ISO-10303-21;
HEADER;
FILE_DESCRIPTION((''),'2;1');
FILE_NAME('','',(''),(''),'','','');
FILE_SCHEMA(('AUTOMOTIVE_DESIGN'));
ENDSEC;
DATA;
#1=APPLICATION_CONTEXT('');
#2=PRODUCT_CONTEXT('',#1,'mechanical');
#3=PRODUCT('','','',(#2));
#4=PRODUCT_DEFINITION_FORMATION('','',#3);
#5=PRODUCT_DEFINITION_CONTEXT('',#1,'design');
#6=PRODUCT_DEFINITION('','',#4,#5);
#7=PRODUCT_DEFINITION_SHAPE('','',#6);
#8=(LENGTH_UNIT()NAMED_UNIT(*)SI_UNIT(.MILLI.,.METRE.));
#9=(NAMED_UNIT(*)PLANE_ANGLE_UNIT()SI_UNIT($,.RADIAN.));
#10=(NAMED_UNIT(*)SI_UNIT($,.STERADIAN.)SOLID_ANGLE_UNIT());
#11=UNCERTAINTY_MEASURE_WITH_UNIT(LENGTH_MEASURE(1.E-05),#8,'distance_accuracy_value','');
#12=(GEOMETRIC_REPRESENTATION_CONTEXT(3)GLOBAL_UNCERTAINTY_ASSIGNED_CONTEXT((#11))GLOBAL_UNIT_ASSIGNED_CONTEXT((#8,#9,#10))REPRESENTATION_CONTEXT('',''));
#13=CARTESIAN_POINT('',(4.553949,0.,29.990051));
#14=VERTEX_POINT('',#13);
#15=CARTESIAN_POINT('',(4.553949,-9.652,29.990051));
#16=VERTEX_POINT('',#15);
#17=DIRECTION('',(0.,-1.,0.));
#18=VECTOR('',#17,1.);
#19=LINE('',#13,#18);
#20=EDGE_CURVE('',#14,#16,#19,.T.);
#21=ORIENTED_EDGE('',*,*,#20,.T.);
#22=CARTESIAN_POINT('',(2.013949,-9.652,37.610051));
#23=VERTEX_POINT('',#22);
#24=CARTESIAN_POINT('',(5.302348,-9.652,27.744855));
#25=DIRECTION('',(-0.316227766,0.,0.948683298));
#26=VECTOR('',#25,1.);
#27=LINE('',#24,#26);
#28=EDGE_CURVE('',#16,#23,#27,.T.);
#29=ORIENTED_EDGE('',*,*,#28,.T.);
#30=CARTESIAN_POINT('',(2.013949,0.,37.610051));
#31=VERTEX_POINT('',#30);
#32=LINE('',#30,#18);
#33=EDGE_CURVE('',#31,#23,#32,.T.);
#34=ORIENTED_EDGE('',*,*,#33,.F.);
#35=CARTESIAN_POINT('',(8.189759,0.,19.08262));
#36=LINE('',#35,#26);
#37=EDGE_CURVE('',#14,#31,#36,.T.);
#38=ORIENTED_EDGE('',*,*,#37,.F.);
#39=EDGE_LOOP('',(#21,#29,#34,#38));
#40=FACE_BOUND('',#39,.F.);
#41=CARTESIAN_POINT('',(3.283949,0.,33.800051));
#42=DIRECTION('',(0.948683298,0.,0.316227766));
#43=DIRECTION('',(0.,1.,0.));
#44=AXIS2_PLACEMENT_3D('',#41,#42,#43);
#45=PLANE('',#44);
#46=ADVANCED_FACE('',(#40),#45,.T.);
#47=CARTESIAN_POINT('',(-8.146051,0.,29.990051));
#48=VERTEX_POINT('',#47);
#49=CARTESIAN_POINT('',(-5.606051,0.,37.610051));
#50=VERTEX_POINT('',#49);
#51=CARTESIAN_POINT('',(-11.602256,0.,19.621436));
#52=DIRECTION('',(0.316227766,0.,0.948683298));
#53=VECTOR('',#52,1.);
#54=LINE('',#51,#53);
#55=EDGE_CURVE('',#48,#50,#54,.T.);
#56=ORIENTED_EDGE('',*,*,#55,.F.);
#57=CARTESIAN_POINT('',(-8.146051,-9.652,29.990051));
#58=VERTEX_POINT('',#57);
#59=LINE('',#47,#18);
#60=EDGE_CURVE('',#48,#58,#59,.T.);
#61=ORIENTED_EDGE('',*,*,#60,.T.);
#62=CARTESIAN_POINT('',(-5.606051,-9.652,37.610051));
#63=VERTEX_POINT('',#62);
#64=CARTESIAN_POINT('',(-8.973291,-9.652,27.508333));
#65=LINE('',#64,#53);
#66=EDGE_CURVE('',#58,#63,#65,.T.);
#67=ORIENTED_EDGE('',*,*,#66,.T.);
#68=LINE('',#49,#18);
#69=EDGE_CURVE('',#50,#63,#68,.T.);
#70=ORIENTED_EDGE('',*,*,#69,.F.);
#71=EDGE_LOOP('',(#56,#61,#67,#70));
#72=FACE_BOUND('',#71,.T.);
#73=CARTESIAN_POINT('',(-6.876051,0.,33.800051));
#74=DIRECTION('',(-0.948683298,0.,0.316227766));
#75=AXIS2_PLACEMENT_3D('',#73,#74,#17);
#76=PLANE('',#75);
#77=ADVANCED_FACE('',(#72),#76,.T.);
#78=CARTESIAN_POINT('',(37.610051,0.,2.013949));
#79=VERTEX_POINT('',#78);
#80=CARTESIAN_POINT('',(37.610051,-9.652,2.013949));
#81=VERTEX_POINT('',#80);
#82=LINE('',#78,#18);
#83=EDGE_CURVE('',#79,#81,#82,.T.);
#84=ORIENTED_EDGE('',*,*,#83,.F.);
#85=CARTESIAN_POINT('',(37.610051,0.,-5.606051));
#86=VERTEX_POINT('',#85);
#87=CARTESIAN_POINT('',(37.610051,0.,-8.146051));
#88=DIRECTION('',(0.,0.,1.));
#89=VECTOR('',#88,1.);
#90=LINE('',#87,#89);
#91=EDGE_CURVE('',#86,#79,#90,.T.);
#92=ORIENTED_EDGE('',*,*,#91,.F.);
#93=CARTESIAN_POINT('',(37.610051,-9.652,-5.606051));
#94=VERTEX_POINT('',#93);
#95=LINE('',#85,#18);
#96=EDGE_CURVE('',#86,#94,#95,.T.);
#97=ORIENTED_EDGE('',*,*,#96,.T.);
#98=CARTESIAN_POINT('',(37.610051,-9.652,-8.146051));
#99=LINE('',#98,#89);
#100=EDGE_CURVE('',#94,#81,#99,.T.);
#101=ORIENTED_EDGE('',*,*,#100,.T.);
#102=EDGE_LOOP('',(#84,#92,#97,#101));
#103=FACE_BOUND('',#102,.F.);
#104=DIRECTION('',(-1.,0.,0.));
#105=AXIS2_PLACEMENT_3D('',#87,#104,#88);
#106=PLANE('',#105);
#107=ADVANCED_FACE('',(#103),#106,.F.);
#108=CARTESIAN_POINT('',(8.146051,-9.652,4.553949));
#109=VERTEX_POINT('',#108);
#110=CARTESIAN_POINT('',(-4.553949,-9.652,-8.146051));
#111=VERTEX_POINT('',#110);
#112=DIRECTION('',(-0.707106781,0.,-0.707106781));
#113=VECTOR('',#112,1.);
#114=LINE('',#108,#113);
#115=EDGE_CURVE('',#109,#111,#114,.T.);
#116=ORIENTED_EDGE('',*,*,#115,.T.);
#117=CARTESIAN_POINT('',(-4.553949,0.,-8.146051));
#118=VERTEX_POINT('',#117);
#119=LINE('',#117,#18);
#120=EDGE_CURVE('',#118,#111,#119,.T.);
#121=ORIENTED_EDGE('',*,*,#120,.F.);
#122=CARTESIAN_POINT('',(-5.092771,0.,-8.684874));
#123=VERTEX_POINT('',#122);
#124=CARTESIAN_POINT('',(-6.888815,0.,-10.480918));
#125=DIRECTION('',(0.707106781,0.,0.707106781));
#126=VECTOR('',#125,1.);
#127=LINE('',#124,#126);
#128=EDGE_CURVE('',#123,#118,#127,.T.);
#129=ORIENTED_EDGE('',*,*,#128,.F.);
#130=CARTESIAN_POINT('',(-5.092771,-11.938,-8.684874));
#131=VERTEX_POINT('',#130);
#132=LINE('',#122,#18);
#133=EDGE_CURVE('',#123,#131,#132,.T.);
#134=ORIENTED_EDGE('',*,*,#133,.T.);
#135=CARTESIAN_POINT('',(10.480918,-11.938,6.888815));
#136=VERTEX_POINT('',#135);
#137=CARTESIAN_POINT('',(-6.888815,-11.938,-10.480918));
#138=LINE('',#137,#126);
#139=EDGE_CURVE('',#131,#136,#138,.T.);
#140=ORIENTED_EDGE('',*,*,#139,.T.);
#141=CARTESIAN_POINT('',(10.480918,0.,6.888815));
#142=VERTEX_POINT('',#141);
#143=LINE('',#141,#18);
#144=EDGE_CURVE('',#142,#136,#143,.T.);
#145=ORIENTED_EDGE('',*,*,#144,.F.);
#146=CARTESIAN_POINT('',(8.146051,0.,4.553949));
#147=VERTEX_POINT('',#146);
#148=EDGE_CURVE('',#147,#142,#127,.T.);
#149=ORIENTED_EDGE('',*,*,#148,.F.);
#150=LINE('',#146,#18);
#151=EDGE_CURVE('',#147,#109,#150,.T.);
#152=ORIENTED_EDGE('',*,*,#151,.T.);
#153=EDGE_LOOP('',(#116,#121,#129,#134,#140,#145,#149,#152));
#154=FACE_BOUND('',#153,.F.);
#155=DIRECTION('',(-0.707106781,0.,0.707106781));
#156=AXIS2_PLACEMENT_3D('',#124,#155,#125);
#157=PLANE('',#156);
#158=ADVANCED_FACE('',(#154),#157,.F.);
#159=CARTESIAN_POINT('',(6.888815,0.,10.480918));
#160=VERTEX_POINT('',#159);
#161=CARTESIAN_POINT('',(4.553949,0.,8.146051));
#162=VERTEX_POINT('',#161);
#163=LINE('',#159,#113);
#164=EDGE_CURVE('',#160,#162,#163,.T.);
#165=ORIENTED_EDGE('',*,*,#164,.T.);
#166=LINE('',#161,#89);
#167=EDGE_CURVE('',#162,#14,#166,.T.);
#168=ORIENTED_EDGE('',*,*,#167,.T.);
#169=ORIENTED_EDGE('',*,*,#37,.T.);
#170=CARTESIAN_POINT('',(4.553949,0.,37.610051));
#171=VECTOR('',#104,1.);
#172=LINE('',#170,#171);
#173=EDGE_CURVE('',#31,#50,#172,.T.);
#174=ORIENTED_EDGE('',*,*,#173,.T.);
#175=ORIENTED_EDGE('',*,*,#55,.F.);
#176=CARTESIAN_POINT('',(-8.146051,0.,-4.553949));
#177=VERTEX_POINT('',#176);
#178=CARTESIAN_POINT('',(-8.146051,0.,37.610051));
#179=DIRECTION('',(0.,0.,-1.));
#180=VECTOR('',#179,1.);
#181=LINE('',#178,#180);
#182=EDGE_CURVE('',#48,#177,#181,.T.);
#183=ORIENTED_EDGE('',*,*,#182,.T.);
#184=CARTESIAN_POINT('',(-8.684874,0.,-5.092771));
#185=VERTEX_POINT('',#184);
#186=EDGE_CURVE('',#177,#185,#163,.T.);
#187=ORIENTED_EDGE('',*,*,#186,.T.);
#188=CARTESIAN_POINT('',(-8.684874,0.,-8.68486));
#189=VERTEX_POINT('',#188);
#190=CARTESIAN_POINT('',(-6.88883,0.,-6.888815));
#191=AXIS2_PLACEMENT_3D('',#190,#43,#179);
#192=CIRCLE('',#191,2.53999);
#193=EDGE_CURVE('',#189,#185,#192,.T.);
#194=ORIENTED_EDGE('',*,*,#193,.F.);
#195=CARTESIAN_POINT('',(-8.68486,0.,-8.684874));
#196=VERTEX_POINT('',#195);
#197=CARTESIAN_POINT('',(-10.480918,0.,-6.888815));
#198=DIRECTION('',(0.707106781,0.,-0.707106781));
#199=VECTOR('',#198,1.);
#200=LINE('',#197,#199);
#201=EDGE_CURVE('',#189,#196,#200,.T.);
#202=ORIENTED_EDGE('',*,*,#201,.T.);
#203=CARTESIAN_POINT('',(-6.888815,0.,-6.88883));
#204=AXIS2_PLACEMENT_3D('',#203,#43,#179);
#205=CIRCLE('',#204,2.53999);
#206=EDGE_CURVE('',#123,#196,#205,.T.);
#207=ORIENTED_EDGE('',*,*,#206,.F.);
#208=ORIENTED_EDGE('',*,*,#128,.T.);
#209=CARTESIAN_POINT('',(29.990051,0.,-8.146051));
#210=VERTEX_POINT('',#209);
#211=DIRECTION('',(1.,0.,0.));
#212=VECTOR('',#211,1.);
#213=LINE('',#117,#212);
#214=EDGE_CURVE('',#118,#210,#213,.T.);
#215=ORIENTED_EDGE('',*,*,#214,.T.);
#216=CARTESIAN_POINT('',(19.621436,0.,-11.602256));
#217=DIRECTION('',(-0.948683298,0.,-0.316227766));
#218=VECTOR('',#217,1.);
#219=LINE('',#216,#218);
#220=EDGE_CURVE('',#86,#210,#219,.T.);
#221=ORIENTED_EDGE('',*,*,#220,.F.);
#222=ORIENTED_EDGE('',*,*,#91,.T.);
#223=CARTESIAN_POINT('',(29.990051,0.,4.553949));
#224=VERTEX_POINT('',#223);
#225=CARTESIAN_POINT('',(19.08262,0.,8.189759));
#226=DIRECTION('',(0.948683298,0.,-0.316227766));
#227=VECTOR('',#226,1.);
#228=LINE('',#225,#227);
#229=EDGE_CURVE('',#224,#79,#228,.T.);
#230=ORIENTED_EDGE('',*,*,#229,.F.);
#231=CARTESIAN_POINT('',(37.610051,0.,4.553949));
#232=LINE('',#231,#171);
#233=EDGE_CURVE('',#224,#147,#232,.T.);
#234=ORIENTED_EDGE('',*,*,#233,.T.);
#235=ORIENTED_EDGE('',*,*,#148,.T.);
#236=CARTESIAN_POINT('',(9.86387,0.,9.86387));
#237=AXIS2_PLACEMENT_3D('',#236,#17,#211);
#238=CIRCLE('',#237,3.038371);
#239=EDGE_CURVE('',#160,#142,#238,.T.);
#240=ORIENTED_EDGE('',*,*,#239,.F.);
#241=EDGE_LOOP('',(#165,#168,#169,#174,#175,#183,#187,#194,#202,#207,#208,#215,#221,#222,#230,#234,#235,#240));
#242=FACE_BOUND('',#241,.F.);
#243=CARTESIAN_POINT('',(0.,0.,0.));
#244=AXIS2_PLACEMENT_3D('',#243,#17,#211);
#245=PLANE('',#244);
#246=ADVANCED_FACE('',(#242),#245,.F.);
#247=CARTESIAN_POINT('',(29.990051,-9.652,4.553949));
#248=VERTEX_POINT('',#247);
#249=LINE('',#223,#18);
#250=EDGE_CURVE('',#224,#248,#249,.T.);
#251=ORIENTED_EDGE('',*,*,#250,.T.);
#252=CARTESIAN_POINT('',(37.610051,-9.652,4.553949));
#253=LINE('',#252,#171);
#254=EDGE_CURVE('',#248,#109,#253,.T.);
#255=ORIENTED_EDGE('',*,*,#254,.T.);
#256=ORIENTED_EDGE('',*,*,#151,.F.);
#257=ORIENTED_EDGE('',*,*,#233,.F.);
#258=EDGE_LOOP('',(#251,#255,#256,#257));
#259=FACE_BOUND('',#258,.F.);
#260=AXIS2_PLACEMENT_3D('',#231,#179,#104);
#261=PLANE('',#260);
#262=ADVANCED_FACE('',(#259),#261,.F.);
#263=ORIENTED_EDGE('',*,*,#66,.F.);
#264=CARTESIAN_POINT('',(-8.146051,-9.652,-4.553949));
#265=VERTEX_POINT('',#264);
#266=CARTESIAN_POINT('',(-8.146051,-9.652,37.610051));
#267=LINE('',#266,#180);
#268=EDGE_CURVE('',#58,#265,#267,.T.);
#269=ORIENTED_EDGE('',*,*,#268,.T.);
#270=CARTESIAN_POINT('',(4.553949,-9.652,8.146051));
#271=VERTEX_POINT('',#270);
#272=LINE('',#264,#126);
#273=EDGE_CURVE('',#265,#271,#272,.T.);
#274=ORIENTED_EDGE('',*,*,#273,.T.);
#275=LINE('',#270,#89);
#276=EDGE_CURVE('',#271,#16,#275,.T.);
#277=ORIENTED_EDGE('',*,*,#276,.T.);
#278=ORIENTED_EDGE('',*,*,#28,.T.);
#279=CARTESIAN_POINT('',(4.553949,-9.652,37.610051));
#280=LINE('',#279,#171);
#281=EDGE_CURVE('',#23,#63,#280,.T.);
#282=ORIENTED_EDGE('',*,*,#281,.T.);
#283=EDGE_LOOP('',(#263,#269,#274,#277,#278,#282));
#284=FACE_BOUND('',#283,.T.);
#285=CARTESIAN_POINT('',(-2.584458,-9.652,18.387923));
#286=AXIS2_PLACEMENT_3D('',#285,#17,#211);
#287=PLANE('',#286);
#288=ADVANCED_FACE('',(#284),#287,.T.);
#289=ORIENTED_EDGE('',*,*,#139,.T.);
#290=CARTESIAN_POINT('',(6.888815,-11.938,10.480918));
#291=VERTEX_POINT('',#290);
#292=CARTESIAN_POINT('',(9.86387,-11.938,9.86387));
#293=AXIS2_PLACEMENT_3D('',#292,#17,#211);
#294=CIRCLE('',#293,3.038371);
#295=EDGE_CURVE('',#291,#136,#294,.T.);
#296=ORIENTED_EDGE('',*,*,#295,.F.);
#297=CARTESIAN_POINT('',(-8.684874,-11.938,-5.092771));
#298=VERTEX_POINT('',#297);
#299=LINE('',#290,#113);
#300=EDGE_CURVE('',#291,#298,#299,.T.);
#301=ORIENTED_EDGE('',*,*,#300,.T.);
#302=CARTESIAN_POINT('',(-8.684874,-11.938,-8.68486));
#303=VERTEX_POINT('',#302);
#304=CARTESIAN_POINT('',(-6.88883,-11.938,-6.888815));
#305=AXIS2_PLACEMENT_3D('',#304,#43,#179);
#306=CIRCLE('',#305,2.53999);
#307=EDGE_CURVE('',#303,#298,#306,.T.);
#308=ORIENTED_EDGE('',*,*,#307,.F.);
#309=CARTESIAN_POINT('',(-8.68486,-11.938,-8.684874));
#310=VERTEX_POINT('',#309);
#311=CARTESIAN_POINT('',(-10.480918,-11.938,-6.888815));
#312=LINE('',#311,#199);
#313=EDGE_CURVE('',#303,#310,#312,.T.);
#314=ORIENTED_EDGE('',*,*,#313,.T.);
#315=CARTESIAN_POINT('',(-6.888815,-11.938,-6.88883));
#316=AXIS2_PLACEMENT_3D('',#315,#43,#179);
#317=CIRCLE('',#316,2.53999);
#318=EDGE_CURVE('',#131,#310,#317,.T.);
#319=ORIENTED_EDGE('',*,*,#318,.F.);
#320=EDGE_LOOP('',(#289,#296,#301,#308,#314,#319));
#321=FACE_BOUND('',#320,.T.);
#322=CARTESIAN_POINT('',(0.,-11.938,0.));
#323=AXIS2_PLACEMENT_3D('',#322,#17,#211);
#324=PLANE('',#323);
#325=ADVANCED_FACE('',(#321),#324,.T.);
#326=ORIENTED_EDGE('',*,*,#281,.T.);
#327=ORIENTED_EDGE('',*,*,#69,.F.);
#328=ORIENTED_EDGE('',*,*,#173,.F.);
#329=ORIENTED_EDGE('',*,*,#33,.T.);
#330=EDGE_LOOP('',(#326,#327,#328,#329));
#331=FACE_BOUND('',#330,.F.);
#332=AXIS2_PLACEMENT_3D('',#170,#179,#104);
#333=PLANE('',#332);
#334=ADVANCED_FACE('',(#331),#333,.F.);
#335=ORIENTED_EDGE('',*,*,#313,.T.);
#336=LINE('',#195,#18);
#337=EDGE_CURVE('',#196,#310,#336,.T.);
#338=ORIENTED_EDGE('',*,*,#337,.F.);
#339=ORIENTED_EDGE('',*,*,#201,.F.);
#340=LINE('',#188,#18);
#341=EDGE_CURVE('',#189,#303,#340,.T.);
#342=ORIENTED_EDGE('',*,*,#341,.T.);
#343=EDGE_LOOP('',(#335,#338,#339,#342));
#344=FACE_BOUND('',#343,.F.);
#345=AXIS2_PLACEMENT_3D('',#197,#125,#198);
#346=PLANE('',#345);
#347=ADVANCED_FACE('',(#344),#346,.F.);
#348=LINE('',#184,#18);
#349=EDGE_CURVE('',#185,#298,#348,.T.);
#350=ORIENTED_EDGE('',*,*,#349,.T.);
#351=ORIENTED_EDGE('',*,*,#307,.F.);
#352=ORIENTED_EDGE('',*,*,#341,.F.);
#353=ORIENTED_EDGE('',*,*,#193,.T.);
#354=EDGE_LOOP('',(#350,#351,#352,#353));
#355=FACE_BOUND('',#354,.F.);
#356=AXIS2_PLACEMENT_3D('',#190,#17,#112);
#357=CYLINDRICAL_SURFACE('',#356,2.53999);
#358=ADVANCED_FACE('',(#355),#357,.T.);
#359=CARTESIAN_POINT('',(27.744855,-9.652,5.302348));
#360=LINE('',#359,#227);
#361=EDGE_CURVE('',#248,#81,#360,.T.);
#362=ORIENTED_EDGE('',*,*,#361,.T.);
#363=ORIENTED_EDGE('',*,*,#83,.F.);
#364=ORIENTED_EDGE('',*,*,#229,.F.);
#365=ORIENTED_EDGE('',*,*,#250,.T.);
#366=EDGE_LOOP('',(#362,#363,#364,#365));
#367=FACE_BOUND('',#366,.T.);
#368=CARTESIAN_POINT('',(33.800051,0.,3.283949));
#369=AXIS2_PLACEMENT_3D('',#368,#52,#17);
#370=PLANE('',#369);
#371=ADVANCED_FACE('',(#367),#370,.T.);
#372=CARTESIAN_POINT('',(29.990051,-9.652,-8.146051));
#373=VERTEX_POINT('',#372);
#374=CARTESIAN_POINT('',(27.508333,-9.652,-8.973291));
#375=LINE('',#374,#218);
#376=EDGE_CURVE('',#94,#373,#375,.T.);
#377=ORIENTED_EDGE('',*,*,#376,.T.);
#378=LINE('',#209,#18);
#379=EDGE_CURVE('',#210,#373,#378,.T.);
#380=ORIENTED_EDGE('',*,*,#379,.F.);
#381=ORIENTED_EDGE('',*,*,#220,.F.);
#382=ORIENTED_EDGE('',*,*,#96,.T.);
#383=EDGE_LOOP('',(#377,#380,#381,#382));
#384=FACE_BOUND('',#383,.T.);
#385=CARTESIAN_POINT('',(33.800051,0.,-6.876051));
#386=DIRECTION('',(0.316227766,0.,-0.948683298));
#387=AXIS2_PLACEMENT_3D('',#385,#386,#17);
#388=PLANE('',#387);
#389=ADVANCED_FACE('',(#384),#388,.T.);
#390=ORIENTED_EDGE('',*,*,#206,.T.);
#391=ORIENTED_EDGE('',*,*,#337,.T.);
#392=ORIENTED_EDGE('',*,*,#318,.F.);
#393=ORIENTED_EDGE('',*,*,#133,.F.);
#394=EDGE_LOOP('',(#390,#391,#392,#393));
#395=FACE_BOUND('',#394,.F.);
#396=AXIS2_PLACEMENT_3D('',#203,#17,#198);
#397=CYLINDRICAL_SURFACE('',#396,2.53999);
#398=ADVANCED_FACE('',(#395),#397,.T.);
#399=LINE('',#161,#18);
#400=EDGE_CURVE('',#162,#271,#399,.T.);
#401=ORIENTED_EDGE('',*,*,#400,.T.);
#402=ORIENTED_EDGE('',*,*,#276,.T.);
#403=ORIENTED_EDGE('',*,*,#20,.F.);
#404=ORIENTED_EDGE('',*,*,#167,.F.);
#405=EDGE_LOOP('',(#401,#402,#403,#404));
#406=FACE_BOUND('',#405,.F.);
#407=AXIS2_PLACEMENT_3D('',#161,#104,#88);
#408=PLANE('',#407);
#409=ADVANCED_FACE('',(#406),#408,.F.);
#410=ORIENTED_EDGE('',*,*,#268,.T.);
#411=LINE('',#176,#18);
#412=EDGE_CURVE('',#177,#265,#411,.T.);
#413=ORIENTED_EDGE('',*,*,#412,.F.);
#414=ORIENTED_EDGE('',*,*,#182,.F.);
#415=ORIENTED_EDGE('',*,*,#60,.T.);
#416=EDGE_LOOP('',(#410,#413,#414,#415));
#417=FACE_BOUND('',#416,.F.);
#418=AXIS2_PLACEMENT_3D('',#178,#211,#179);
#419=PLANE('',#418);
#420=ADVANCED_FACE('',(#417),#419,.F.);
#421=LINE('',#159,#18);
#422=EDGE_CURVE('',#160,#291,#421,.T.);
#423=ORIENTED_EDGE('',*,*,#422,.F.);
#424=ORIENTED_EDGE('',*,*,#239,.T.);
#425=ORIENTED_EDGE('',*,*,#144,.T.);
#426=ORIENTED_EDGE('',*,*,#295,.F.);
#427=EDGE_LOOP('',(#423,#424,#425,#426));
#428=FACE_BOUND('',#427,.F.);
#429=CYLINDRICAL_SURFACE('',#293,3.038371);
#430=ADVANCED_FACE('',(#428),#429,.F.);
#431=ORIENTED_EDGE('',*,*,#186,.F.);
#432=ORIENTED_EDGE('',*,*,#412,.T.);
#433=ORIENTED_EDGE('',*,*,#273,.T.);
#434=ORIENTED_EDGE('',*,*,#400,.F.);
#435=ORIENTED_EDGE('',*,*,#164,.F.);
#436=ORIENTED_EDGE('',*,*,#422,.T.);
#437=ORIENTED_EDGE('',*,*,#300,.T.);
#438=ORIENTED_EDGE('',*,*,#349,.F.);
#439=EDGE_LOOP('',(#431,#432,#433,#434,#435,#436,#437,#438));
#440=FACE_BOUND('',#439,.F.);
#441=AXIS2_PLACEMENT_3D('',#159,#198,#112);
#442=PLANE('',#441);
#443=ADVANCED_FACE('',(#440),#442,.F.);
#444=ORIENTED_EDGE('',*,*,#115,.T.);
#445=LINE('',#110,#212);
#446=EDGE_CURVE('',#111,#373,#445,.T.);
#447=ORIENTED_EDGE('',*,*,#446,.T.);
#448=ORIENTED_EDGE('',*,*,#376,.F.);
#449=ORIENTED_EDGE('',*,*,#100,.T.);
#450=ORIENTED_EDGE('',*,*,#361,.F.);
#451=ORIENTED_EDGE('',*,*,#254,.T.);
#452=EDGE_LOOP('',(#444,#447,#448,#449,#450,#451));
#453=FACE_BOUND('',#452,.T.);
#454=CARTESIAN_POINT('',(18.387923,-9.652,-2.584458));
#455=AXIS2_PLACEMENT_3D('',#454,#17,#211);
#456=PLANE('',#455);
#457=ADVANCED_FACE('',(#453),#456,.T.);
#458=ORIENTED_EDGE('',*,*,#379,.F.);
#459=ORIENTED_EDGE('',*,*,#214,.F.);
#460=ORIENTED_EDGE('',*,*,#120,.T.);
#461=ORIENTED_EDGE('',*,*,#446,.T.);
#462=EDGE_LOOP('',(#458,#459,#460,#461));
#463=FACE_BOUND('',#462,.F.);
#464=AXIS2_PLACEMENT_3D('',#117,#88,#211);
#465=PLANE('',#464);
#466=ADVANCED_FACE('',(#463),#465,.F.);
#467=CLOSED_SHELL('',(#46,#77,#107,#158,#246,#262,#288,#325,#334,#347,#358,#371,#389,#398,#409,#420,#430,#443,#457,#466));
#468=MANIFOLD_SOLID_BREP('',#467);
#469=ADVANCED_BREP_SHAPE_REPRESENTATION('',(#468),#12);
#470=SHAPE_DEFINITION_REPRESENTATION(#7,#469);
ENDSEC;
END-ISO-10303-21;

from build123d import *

# Parameters (mm, degrees)
F1_DEPTH   = 11.938
F2_DEPTH   = 9.652
F3_SIZE2   = 2.54
F3_SIZE    = 7.62
F3_2_SIZE2 = 2.54
F3_2_SIZE  = 7.62
F3_3_SIZE2 = 2.54
F3_3_SIZE  = 7.62
F4_SIZE2   = 7.62
F4_SIZE    = 2.54
F5_R       = 2.53999
F6_R       = 3.0383713325
F7_DEPTH   = 25.4


# Not quite as in the source:
# - a fillet or chamfer is up to 0.001 mm smaller than in the source, because OpenCascade refuses the exact size


with BuildPart() as f1:
    # F0 (on Front) → F1 (new body)
    with BuildSketch(Plane.XZ):
        Polygon((-6.8888153673, -10.4809178157), (-4.5539487758, -8.1460512242), (8.1460512242, 4.5539487758), (10.4809178157, 6.8888153673), (6.8888153673, 10.4809178157), (4.5539487758, 8.1460512242), (-8.1460512242, -4.5539487758), (-10.4809178157, -6.8888153673), align=None)
    extrude(amount=F1_DEPTH)

    # F0 (on Front) → F2 (join)
    with BuildSketch(Plane.XZ):
        Polygon((-8.1460512242, 37.6100512242), (-8.1460512242, -4.5539487758), (4.5539487758, 8.1460512242), (4.5539487758, 37.6100512242), (0, 37.6100512242), align=None)
        Polygon((8.1460512242, 4.5539487758), (-4.5539487758, -8.1460512242), (37.6100512242, -8.1460512242), (37.6100512242, 0), (37.6100512242, 4.5539487758), align=None)
    extrude(amount=F2_DEPTH)

    # F3
    f3_edges = [f1.edges().sort_by_distance(p)[0] for p in [
        (-8.146051, -4.826, 37.610051),
    ]]
    f3_side = f1.faces().sort_by_distance((-8.146051, -4.826, 16.528051))[0]
    chamfer(f3_edges, length=F3_SIZE, length2=F3_SIZE2, reference=f3_side)

    # F3#2
    f3_2_edges = [f1.edges().sort_by_distance(p)[0] for p in [
        (4.553949, -4.826, 37.610051),
    ]]
    f3_2_side = f1.faces().sort_by_distance((4.553949, -4.826, 22.878051))[0]
    chamfer(f3_2_edges, length=F3_2_SIZE, length2=F3_2_SIZE2, reference=f3_2_side)

    # F3#3
    f3_3_edges = [f1.edges().sort_by_distance(p)[0] for p in [
        (37.610051, -4.826, 4.553949),
    ]]
    f3_3_side = f1.faces().sort_by_distance((22.878051, -4.826, 4.553949))[0]
    chamfer(f3_3_edges, length=F3_3_SIZE, length2=F3_3_SIZE2, reference=f3_3_side)

    # F4
    f4_edges = [f1.edges().sort_by_distance(p)[0] for p in [
        (37.610051, -4.826, -8.146051),
    ]]
    f4_side = f1.faces().sort_by_distance((37.610051, -4.826, -3.066051))[0]
    chamfer(f4_edges, length=F4_SIZE, length2=F4_SIZE2, reference=f4_side)

    # F5 (radius 2.54 in the source; OpenCascade refuses exactly that, so slightly less here)
    f5_edges = [f1.edges().sort_by_distance(p)[0] for p in [
        (-10.480918, -5.969, -6.888815),
        (-6.888815, -5.969, -10.480918),
    ]]
    fillet(f5_edges, radius=F5_R)

    # F6 (on face) → F7 (cut)
    with BuildSketch(Plane.XZ.offset(11.938)):
        with Locations((9.8638704833, 9.8638704833)):
            Circle(F6_R)
    extrude(amount=-F7_DEPTH, mode=Mode.SUBTRACT)


solid = f1.part
